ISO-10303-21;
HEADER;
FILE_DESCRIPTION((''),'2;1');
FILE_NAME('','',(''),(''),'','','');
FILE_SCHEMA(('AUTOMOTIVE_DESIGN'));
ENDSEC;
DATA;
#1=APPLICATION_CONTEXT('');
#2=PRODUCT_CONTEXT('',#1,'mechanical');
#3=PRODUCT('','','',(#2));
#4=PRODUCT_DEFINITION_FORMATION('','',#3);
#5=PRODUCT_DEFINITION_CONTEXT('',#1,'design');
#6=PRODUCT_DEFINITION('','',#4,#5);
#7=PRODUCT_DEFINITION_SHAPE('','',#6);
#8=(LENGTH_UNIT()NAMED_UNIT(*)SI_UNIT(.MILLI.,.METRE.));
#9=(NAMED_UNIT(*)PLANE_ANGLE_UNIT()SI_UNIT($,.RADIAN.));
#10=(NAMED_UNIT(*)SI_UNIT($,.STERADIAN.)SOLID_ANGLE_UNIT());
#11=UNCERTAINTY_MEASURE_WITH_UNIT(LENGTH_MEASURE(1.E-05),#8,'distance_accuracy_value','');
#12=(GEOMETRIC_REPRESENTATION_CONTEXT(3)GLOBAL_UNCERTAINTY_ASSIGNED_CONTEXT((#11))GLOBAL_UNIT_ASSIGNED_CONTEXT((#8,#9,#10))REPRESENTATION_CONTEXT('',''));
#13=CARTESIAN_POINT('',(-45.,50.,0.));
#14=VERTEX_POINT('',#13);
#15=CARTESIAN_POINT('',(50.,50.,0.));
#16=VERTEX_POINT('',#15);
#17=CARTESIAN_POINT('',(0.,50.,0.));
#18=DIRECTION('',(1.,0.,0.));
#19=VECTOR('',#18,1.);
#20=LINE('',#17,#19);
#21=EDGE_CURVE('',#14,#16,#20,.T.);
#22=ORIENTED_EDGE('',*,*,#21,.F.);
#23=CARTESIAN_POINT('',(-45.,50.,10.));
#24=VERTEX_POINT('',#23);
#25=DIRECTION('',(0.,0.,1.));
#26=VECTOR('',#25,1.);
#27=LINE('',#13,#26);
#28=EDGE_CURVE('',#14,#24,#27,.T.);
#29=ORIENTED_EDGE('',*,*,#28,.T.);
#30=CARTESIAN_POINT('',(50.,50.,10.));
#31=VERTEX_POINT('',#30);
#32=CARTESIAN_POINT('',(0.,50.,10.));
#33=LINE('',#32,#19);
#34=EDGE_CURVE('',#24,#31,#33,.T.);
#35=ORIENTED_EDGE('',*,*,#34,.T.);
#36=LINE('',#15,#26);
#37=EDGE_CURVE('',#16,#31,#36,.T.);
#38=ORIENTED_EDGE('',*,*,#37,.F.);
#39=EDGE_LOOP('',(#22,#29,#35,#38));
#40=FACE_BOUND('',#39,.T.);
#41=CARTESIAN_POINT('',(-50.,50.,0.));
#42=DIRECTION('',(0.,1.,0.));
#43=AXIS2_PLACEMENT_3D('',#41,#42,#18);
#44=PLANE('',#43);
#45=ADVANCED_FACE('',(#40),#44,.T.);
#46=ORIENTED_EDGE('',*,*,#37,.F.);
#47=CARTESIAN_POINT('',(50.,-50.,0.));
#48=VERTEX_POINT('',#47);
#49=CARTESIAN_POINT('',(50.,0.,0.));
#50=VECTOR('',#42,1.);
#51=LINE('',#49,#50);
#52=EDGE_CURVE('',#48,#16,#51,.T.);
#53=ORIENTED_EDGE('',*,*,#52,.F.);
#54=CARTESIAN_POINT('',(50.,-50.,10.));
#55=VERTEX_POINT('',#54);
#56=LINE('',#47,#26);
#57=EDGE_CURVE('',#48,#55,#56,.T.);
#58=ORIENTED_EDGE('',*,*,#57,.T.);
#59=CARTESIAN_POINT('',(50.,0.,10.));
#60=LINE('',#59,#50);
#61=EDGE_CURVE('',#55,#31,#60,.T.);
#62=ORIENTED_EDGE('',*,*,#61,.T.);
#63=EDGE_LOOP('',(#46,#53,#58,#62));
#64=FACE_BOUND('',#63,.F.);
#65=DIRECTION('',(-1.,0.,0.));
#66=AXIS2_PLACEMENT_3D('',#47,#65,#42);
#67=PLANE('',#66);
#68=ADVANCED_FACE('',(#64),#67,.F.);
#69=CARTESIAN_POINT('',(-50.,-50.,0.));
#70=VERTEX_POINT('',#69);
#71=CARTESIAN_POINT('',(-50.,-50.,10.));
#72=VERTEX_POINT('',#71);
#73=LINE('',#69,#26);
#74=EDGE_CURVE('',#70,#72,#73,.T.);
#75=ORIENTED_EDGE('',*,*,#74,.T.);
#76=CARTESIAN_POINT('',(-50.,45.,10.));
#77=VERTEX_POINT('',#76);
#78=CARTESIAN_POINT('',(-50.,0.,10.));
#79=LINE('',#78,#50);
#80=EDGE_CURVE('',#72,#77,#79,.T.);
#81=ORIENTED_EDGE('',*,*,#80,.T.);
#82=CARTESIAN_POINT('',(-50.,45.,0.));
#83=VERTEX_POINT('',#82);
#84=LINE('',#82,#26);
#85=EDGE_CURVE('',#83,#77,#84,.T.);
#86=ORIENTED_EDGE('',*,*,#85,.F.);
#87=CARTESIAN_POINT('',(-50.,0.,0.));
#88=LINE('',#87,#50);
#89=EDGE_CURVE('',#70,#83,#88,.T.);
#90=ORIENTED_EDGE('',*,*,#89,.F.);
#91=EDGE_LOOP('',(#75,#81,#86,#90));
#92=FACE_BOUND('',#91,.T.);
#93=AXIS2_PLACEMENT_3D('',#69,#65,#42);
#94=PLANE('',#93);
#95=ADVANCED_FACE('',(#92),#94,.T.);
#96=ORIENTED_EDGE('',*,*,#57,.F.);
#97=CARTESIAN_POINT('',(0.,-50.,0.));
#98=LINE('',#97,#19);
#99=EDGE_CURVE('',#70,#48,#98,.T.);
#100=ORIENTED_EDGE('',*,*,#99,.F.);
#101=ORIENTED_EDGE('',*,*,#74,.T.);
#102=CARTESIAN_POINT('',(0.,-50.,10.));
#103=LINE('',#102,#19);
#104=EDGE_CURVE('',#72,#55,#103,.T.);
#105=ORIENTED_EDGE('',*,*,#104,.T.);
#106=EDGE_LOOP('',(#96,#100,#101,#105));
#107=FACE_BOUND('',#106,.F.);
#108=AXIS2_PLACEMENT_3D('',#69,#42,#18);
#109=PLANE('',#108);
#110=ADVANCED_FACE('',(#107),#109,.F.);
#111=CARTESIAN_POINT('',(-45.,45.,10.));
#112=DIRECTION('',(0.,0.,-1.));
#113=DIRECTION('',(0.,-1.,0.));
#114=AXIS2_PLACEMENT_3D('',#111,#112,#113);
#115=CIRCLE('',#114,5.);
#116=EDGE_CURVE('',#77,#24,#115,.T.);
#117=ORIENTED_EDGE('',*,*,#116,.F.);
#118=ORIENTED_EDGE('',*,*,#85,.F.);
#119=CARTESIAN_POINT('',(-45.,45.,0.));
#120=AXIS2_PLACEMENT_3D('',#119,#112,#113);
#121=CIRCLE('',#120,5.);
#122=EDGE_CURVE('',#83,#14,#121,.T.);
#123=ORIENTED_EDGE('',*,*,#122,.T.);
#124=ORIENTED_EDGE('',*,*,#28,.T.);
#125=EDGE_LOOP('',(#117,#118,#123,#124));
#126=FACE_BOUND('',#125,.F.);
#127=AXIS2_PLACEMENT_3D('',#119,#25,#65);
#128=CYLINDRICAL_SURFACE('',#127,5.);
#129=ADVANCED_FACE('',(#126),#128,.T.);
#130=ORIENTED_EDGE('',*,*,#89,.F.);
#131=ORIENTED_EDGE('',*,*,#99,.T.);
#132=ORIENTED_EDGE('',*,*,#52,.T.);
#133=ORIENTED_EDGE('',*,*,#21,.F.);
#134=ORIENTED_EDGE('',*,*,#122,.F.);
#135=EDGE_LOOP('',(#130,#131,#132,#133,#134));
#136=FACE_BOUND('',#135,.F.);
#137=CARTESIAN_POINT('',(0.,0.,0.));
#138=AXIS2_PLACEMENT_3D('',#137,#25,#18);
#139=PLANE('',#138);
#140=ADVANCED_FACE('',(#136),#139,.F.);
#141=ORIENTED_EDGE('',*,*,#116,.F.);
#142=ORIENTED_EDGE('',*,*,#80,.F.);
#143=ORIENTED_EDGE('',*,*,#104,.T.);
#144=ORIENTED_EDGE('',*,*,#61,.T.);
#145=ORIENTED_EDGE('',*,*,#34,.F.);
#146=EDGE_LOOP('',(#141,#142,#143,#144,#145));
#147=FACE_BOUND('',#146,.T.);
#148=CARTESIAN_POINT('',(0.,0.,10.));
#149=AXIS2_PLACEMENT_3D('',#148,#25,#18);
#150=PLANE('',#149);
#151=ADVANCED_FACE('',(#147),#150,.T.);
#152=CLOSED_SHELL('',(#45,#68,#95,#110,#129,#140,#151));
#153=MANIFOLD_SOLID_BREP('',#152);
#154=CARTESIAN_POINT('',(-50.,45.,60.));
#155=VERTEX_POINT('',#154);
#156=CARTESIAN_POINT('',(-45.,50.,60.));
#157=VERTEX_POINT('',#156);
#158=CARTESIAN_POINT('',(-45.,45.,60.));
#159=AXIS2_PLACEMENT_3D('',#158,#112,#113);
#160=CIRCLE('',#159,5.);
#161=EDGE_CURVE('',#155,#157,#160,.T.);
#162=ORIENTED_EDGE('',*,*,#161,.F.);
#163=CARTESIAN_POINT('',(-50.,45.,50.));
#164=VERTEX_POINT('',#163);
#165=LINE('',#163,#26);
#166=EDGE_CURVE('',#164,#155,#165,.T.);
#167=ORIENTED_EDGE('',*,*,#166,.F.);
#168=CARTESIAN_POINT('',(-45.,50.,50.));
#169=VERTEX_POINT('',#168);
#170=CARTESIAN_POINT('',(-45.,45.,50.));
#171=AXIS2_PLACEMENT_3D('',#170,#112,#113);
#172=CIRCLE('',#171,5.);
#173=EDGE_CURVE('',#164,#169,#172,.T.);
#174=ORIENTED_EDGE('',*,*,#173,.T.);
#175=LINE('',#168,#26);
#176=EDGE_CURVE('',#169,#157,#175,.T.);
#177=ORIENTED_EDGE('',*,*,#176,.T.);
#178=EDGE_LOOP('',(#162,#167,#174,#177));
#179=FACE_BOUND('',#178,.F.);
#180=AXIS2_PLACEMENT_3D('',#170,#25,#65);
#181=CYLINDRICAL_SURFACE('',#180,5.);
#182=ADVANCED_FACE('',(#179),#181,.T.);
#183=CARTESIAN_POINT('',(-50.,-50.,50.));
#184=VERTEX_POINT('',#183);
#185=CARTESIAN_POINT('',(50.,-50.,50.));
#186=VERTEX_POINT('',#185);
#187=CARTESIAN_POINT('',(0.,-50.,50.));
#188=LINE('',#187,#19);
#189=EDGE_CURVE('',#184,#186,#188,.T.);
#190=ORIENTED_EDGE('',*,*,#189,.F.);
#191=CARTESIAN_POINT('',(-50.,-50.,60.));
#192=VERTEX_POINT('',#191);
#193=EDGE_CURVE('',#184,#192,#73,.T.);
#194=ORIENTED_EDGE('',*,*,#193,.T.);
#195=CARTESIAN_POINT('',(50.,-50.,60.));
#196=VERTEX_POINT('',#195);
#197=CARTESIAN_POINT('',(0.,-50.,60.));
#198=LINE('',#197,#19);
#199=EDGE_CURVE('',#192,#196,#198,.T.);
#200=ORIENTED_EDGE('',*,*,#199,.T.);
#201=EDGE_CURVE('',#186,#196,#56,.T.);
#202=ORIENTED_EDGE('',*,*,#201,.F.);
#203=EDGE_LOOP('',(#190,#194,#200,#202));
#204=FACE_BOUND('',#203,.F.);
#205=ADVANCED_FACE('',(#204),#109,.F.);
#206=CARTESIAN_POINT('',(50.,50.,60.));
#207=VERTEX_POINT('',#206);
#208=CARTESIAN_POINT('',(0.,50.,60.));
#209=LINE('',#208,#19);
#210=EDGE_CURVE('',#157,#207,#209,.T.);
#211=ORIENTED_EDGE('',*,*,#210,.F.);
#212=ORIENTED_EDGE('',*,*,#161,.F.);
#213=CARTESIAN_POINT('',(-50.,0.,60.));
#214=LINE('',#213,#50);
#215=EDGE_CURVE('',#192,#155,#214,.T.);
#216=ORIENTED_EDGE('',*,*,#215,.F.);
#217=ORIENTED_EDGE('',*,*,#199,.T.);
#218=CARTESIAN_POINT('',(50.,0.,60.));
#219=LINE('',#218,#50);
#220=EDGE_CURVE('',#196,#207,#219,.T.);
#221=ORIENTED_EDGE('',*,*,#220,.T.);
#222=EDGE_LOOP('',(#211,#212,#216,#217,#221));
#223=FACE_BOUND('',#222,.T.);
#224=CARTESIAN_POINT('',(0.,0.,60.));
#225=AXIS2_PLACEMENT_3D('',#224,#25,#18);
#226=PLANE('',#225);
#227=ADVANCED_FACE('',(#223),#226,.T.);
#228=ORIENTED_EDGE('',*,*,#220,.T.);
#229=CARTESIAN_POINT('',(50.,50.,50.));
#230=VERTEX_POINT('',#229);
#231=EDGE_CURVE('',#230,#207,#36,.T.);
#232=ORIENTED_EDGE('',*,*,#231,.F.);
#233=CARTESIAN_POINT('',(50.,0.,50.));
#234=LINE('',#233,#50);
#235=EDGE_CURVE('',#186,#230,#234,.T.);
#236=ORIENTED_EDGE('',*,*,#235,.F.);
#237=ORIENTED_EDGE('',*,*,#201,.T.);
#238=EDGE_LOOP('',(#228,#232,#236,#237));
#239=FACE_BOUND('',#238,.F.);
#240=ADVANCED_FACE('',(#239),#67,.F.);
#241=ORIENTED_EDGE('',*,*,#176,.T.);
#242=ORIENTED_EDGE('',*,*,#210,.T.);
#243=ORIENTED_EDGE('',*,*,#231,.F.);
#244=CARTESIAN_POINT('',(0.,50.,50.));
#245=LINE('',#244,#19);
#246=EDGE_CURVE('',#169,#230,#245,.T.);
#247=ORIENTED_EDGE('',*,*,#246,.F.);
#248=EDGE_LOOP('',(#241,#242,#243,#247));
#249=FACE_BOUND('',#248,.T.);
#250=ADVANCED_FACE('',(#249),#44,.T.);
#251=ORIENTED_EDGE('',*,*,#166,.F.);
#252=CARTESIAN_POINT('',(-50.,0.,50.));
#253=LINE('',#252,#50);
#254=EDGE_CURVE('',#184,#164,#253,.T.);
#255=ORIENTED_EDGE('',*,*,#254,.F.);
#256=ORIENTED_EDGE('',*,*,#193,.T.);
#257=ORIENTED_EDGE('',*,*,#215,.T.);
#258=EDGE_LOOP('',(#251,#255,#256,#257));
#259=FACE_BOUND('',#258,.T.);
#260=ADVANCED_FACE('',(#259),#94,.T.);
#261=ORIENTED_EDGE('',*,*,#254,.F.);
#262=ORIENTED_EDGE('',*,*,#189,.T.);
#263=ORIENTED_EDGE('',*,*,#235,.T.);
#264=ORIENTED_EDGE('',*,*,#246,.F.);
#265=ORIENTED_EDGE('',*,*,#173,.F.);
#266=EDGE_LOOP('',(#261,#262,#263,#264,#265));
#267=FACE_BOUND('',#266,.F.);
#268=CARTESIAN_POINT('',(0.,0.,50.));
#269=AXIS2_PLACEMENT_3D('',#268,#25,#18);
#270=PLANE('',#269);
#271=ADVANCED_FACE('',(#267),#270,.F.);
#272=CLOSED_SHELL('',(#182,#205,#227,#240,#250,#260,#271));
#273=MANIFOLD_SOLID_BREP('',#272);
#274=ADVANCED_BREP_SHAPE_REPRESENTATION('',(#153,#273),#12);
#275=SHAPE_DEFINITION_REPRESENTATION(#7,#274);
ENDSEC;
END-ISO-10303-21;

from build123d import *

# Parameters (mm, degrees)
F0_W      = 100
F0_H      = 100
F1_DEPTH  = 60
F3_START  = -10
F1_FACE_W = 100
F1_FACE_H = 100
F3_DEPTH  = 40
F4_R      = 5


with BuildPart() as f1:
    # F0 (on Top) → F1 (new body)
    with BuildSketch(Plane.XY):
        Rectangle(F0_W, F0_H)
    extrude(amount=F1_DEPTH)

    # F1_face (on face) → F3 (cut)
    with BuildSketch(Plane.XY.offset(60).offset(F3_START)):
        Rectangle(F1_FACE_W, F1_FACE_H)
    extrude(amount=-F3_DEPTH, mode=Mode.SUBTRACT)

    # F4
    f4_edges = [f1.edges().sort_by_distance(p)[0] for p in [
        (-50, 50, 5),
        (-50, 50, 55),
    ]]
    fillet(f4_edges, radius=F4_R)


solid = f1.part
